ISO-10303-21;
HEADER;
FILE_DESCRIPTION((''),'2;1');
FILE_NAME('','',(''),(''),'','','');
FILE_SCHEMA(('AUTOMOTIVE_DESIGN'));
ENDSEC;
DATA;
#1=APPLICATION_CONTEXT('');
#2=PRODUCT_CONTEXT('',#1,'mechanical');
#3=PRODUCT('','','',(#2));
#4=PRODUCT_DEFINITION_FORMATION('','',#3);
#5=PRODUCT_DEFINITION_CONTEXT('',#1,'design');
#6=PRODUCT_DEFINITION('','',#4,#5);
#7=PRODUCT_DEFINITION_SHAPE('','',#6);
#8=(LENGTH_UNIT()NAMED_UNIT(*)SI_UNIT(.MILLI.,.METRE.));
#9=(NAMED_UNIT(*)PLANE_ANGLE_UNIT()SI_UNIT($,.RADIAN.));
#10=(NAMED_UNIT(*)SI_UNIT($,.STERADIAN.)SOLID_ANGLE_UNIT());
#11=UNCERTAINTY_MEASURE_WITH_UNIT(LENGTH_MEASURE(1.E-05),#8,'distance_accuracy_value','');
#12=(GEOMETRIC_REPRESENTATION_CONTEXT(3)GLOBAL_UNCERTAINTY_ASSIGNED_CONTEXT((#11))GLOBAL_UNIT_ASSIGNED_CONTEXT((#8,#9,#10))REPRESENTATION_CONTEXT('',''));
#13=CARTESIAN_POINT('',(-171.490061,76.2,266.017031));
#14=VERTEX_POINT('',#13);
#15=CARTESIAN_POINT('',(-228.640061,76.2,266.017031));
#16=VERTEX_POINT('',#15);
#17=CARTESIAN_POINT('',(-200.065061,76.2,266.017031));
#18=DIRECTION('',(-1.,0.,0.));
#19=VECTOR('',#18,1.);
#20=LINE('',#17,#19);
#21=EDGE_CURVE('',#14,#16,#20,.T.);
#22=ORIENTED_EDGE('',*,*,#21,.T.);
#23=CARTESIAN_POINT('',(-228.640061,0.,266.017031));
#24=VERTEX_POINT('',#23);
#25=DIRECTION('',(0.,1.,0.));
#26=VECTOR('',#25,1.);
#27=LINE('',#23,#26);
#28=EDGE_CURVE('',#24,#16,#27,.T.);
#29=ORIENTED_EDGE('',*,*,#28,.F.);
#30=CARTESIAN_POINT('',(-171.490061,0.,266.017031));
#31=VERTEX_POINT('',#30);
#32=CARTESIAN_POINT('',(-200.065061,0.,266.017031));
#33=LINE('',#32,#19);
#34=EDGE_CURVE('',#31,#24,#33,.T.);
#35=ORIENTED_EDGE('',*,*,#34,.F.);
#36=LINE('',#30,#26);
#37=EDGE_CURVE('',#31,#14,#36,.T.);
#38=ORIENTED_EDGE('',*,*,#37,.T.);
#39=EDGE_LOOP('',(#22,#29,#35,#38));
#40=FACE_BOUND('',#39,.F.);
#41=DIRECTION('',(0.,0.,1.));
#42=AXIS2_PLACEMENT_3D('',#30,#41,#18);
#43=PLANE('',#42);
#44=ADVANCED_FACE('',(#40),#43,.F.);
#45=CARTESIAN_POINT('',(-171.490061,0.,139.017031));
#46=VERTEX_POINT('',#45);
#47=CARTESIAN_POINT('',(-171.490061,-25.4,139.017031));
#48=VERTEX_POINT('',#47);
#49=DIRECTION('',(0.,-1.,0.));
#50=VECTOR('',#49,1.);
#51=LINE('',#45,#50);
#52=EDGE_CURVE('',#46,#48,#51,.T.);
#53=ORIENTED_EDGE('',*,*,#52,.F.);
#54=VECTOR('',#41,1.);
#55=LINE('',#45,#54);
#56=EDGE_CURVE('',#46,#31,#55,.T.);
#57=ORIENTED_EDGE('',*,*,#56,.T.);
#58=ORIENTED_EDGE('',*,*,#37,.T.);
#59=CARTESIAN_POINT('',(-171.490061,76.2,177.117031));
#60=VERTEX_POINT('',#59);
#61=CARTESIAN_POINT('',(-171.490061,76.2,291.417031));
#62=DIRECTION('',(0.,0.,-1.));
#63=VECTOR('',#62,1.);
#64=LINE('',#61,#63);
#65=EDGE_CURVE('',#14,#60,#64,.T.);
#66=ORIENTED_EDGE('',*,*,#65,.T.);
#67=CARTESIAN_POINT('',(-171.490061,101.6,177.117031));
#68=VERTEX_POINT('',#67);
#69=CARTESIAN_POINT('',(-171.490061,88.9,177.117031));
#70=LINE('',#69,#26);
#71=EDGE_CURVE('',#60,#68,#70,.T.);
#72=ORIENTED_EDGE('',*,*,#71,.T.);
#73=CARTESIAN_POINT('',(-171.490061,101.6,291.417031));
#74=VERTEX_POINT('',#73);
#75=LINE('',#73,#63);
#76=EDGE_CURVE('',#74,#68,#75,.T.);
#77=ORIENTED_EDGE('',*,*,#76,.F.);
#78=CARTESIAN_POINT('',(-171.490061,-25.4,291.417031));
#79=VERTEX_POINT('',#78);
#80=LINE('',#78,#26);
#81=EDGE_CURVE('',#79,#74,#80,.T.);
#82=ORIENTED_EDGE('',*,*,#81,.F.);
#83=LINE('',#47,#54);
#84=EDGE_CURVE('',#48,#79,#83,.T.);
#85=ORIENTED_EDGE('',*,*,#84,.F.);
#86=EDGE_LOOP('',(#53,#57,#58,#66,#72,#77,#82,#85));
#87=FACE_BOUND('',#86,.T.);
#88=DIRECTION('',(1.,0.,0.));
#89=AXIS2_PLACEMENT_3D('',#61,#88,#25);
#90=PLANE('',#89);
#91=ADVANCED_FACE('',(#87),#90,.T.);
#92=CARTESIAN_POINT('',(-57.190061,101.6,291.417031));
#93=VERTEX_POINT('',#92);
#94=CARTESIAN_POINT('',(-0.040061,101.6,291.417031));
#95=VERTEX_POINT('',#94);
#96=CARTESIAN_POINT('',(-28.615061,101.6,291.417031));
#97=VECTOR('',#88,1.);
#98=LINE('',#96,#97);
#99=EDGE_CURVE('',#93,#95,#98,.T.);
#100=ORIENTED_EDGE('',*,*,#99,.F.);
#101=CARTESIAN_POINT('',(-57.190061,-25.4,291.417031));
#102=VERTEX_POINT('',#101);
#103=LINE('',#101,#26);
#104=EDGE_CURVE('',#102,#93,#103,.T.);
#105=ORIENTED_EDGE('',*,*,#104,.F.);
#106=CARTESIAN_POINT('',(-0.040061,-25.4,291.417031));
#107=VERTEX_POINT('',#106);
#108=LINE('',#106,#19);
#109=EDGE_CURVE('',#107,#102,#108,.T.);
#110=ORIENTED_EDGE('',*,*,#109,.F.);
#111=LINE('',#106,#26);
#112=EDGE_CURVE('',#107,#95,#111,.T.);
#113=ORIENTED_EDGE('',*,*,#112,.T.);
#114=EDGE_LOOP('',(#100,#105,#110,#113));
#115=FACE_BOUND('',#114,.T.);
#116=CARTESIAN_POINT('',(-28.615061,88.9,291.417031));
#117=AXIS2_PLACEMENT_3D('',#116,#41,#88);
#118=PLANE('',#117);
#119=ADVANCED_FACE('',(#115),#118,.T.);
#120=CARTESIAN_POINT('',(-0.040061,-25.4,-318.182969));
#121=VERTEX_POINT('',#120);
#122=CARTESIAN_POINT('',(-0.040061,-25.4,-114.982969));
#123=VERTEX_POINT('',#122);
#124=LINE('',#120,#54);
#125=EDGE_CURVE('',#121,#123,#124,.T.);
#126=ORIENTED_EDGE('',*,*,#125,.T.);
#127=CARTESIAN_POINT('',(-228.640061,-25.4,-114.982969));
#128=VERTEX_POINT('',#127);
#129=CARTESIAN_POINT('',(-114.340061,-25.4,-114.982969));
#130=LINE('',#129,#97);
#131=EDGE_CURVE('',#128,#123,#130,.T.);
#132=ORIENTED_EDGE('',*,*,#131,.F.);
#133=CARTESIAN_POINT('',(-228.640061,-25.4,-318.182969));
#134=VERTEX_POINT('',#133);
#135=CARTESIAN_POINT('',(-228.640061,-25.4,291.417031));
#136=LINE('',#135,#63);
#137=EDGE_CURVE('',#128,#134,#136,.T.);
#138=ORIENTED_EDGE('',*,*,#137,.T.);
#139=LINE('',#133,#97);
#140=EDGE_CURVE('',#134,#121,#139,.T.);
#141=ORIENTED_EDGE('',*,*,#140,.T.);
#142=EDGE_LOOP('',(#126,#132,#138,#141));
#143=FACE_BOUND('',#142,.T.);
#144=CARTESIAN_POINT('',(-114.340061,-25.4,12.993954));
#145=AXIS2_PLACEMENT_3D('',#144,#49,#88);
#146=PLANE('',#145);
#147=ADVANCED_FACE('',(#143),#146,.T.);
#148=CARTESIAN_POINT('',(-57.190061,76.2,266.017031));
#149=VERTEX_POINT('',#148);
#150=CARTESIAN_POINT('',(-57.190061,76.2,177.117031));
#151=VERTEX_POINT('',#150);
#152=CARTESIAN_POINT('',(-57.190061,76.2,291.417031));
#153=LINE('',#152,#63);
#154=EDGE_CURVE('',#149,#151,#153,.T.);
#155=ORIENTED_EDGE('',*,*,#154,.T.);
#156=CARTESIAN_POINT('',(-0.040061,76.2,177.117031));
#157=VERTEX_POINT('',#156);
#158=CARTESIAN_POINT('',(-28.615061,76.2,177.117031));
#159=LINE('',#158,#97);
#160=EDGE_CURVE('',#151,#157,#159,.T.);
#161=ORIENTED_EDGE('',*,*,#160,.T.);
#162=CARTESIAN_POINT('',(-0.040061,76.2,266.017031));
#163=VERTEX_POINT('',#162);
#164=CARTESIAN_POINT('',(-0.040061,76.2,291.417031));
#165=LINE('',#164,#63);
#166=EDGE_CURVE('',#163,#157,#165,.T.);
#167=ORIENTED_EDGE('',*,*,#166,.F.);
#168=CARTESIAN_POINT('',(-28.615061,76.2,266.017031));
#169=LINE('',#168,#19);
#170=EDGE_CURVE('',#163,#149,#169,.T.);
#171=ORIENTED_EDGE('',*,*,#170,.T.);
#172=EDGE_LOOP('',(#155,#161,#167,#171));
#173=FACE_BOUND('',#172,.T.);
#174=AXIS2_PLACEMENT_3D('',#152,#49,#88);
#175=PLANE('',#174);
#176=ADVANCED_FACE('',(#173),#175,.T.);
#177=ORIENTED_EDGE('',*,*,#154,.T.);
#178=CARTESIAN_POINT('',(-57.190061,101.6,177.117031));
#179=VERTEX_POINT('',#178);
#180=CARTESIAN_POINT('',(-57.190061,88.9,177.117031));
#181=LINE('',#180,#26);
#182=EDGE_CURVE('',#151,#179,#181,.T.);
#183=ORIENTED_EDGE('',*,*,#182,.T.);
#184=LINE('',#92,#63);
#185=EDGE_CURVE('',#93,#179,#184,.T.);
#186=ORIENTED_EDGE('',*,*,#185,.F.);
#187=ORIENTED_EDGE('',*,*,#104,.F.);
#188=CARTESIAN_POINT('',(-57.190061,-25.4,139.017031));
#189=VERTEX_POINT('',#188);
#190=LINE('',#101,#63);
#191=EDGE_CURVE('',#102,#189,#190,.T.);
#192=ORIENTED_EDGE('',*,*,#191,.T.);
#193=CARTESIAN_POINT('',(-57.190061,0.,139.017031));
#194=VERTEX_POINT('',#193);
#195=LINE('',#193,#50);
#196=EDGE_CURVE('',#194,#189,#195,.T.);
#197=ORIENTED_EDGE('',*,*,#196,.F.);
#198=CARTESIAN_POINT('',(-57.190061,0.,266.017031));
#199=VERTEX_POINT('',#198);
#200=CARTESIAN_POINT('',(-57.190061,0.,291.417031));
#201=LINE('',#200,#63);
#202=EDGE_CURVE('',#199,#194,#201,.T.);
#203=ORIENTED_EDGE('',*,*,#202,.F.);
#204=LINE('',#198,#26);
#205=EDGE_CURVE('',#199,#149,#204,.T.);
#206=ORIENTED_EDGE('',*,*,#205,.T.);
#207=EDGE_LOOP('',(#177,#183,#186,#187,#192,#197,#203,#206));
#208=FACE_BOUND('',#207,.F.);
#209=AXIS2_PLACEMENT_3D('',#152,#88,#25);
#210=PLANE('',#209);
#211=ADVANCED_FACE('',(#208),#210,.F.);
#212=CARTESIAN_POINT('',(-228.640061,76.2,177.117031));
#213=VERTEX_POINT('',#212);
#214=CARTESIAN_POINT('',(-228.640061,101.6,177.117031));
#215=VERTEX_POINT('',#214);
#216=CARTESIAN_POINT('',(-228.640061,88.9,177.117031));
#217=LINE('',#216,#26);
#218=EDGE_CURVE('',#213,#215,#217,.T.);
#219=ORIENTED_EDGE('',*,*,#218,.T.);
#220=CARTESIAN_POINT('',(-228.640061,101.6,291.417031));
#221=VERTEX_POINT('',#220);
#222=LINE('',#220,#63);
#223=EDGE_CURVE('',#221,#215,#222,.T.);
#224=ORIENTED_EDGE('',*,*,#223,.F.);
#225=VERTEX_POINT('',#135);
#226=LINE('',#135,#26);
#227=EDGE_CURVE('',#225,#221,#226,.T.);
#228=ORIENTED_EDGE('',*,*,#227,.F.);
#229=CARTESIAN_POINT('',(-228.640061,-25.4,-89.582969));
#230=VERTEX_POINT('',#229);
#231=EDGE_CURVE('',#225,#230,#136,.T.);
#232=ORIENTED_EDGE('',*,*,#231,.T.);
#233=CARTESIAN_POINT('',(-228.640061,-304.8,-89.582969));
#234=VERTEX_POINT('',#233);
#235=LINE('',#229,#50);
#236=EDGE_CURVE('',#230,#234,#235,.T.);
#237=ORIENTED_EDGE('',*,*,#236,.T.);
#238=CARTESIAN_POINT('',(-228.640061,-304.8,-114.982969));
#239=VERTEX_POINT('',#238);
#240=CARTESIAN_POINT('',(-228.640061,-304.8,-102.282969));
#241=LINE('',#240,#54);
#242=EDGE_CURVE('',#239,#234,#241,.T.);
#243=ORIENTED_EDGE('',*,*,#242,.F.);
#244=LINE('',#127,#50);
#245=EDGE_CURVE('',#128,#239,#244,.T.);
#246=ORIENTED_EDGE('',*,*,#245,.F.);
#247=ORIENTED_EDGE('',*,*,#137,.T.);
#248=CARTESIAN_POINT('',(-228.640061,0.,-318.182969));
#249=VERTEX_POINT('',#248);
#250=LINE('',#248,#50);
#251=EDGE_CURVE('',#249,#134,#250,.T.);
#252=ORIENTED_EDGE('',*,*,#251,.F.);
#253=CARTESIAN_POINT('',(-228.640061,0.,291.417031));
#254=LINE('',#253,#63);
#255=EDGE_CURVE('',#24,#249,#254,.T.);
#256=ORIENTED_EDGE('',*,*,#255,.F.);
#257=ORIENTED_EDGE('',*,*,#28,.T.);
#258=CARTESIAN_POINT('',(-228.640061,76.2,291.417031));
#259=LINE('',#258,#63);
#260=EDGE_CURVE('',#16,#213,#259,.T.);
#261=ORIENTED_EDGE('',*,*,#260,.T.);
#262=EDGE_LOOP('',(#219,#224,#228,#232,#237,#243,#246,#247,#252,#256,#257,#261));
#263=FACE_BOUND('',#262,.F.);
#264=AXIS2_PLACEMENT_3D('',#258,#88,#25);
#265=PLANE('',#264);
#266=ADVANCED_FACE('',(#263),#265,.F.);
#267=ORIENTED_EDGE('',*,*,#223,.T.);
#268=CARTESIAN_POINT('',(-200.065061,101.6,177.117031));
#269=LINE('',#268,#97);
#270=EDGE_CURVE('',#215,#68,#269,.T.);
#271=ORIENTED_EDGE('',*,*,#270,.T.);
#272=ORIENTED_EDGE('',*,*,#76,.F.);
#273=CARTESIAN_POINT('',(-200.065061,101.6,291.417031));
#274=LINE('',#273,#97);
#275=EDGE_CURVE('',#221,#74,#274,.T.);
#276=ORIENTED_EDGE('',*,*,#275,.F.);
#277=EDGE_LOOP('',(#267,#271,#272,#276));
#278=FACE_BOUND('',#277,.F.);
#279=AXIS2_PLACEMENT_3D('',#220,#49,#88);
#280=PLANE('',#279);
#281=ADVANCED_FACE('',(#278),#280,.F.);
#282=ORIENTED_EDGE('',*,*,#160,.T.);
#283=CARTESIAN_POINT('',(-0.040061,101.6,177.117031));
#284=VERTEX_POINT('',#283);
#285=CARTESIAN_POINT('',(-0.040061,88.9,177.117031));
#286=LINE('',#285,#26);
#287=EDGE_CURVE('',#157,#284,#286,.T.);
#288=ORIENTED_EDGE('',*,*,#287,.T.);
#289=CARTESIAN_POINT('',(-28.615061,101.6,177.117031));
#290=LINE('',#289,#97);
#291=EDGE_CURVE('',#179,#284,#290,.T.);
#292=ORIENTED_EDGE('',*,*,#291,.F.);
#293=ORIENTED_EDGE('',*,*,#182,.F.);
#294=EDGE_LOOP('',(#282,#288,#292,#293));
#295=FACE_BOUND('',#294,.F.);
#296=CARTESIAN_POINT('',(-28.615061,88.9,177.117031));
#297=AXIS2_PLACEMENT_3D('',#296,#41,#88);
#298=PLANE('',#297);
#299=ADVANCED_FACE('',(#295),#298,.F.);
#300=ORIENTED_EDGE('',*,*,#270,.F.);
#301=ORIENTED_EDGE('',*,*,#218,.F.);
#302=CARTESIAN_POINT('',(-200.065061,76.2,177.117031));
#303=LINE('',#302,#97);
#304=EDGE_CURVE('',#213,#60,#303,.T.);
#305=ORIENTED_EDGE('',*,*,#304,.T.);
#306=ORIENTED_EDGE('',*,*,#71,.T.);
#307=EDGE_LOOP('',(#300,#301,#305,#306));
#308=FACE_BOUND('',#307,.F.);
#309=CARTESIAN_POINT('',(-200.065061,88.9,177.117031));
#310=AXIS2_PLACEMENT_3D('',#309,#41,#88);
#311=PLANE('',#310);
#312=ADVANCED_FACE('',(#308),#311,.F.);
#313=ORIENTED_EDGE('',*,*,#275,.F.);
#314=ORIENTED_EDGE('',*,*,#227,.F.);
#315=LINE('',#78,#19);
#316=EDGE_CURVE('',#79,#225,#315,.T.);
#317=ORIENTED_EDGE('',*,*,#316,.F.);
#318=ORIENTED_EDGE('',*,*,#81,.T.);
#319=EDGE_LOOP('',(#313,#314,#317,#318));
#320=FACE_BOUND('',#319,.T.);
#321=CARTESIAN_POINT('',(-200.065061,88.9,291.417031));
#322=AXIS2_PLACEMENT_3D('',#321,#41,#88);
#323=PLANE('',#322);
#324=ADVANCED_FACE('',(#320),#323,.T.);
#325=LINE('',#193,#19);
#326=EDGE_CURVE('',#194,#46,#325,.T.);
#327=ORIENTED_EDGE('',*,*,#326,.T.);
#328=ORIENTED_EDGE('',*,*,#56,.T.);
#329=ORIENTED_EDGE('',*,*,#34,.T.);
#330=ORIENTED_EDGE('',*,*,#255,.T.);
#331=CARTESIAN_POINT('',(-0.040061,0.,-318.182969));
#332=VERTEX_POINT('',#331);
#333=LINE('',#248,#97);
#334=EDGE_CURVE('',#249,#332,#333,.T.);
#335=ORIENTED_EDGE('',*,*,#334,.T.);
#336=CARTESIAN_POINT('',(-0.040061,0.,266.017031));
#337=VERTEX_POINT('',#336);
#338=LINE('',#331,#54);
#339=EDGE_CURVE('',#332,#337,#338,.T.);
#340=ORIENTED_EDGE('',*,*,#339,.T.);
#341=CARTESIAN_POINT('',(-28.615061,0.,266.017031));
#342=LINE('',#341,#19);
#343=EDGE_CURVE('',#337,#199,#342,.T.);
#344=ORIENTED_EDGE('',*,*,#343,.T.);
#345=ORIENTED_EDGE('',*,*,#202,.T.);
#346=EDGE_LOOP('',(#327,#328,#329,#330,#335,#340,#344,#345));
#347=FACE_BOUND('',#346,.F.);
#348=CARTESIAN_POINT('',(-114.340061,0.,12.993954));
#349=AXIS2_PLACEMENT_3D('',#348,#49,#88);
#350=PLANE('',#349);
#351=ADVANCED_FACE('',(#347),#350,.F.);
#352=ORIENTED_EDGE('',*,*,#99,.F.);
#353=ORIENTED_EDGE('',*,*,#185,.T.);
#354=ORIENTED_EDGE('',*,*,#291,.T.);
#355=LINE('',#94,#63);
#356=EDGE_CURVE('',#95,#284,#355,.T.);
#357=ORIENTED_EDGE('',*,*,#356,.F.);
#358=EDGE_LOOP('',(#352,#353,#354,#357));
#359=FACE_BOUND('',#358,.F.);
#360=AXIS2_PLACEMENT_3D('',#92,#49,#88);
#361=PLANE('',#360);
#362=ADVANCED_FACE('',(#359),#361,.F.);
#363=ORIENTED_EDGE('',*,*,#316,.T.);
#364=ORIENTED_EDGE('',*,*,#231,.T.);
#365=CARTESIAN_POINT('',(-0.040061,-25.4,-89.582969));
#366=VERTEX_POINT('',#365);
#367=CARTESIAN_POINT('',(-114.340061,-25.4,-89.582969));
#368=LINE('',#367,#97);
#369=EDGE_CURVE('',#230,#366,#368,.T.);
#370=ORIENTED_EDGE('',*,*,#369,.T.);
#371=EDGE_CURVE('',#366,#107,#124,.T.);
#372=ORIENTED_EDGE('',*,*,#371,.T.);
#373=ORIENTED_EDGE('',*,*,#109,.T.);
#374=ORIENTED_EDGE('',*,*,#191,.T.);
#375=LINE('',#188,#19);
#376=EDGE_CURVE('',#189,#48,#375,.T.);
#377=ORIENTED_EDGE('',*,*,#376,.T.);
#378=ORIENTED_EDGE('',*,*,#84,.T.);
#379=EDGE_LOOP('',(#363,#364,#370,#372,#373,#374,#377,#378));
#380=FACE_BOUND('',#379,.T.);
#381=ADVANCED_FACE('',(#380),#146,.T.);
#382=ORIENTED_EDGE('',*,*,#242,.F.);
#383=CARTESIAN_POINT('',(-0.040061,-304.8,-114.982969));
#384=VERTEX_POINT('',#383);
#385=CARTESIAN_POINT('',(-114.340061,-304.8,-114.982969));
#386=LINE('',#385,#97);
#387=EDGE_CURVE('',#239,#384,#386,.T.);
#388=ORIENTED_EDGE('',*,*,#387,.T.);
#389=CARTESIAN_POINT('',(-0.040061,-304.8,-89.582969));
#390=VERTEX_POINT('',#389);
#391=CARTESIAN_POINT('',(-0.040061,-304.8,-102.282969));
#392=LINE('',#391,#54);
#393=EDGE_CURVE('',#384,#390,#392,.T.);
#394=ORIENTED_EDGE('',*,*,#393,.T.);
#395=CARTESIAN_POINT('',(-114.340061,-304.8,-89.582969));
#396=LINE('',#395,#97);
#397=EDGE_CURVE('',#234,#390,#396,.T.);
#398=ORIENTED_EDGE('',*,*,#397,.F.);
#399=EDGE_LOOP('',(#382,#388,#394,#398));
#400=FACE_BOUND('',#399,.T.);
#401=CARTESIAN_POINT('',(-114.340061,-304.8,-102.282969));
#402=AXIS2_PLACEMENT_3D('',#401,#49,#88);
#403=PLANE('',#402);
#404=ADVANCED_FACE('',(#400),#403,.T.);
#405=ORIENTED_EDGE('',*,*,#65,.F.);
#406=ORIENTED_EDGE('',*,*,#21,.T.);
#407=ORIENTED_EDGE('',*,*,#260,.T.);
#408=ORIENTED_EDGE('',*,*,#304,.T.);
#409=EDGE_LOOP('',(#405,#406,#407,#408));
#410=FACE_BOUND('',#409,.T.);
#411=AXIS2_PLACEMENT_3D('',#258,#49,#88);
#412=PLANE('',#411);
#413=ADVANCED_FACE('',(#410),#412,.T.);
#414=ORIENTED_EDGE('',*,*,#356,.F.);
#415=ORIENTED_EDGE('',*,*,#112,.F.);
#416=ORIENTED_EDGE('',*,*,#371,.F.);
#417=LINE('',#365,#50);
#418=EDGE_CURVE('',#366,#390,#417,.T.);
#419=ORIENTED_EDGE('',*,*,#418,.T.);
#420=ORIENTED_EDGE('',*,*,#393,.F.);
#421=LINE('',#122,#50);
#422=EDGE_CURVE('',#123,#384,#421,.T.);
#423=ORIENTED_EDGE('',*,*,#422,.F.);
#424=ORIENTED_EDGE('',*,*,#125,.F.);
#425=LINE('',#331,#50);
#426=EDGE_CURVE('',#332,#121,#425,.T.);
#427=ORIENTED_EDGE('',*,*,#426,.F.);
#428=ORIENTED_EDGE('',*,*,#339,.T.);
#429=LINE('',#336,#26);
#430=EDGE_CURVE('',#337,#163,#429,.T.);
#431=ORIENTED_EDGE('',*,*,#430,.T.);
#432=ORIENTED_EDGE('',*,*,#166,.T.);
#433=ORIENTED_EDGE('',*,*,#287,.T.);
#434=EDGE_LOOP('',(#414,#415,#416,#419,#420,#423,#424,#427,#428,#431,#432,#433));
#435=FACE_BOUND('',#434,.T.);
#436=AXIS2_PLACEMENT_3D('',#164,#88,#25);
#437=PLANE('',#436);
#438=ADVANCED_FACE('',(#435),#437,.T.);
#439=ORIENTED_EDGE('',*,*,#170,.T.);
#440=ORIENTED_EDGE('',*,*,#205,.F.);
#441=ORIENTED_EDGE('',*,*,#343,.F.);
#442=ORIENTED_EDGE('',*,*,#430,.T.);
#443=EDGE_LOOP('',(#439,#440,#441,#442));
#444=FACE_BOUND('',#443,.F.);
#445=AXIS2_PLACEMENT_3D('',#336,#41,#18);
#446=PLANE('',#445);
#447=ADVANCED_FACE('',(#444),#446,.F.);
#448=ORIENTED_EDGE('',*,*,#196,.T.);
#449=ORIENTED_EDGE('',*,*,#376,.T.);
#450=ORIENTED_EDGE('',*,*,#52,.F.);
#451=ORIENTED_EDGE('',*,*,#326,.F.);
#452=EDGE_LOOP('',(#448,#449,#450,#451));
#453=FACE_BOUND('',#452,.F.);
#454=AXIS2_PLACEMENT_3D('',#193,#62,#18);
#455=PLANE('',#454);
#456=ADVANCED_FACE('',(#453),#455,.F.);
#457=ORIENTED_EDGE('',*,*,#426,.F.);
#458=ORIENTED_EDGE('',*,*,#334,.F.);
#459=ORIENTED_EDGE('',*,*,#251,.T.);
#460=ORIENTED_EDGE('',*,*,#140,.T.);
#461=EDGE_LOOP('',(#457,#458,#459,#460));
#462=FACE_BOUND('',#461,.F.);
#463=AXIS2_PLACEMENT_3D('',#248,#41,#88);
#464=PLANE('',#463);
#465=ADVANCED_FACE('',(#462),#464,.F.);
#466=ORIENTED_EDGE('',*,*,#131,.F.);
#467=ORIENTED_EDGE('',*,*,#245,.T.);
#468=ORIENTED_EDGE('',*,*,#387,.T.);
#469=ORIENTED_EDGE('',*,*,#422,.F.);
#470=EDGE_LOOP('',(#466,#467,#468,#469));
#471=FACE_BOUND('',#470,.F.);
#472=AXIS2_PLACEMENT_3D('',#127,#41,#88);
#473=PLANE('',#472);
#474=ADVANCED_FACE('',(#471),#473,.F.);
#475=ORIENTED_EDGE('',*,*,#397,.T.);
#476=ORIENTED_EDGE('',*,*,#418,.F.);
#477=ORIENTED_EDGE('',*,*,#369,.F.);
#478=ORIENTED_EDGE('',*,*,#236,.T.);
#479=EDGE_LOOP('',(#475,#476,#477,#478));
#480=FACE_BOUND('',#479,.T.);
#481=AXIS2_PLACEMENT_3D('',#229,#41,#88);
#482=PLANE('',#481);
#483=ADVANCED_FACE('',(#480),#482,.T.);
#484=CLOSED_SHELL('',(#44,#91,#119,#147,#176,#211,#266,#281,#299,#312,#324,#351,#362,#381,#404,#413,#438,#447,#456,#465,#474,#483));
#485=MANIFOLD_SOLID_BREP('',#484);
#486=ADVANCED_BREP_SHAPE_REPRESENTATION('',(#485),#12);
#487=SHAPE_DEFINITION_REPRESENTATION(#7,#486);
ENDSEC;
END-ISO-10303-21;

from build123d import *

# Parameters (mm, degrees)
F1_DEPTH = 25.4
F2_W     = 57.15
F2_H     = 25.4
F3_DEPTH = 76.2
F4_W     = 57.15
F4_H     = 25.4
F5_DEPTH = 114.3
F6_W     = 57.15
F6_H     = 25.4
F7_DEPTH = 114.3
F8_W     = 228.6
F8_H     = 25.4
F9_DEPTH = 279.4


with BuildPart() as f1:
    # F0 (on Front) → F1 (new body)
    with BuildSketch(Plane.XZ):
        Polygon((-171.4900614394, 291.4170305759), (-228.6400614394, 291.4170305759), (-228.6400614394, -318.1829694241), (-0.0400614394, -318.1829694241), (-0.0400614394, 291.4170305759), (-57.1900614394, 291.4170305759), (-57.1900614394, 139.0170305759), (-171.4900614394, 139.0170305759), align=None)
    extrude(amount=F1_DEPTH)

    # F2 (on face) → F3 (join)
    with BuildSketch(Plane(origin=(0, 0, 0), x_dir=(-1, 0, 0), z_dir=(0, 1, 0))):
        with Locations((28.6150614394, 278.7170305759)):
            Rectangle(F2_W, F2_H)
        with Locations((200.0650614394, 278.7170305759)):
            Rectangle(F2_W, F2_H)
    extrude(amount=F3_DEPTH)

    # F4 (on face) → F5 (join)
    with BuildSketch(Plane.XY.offset(291.4170305759)):
        with Locations((-28.6150614394, 88.9)):
            Rectangle(F4_W, F4_H)
    extrude(amount=-F5_DEPTH)

    # F6 (on face) → F7 (join)
    with BuildSketch(Plane.XY.offset(291.4170305759)):
        with Locations((-200.0650614394, 88.9)):
            Rectangle(F6_W, F6_H)
    extrude(amount=-F7_DEPTH)

    # F8 (on face) → F9 (join)
    with BuildSketch(Plane.XZ.offset(25.4)):
        with Locations((-114.3400614394, -102.2829694241)):
            Rectangle(F8_W, F8_H)
    extrude(amount=F9_DEPTH)


solid = f1.part
